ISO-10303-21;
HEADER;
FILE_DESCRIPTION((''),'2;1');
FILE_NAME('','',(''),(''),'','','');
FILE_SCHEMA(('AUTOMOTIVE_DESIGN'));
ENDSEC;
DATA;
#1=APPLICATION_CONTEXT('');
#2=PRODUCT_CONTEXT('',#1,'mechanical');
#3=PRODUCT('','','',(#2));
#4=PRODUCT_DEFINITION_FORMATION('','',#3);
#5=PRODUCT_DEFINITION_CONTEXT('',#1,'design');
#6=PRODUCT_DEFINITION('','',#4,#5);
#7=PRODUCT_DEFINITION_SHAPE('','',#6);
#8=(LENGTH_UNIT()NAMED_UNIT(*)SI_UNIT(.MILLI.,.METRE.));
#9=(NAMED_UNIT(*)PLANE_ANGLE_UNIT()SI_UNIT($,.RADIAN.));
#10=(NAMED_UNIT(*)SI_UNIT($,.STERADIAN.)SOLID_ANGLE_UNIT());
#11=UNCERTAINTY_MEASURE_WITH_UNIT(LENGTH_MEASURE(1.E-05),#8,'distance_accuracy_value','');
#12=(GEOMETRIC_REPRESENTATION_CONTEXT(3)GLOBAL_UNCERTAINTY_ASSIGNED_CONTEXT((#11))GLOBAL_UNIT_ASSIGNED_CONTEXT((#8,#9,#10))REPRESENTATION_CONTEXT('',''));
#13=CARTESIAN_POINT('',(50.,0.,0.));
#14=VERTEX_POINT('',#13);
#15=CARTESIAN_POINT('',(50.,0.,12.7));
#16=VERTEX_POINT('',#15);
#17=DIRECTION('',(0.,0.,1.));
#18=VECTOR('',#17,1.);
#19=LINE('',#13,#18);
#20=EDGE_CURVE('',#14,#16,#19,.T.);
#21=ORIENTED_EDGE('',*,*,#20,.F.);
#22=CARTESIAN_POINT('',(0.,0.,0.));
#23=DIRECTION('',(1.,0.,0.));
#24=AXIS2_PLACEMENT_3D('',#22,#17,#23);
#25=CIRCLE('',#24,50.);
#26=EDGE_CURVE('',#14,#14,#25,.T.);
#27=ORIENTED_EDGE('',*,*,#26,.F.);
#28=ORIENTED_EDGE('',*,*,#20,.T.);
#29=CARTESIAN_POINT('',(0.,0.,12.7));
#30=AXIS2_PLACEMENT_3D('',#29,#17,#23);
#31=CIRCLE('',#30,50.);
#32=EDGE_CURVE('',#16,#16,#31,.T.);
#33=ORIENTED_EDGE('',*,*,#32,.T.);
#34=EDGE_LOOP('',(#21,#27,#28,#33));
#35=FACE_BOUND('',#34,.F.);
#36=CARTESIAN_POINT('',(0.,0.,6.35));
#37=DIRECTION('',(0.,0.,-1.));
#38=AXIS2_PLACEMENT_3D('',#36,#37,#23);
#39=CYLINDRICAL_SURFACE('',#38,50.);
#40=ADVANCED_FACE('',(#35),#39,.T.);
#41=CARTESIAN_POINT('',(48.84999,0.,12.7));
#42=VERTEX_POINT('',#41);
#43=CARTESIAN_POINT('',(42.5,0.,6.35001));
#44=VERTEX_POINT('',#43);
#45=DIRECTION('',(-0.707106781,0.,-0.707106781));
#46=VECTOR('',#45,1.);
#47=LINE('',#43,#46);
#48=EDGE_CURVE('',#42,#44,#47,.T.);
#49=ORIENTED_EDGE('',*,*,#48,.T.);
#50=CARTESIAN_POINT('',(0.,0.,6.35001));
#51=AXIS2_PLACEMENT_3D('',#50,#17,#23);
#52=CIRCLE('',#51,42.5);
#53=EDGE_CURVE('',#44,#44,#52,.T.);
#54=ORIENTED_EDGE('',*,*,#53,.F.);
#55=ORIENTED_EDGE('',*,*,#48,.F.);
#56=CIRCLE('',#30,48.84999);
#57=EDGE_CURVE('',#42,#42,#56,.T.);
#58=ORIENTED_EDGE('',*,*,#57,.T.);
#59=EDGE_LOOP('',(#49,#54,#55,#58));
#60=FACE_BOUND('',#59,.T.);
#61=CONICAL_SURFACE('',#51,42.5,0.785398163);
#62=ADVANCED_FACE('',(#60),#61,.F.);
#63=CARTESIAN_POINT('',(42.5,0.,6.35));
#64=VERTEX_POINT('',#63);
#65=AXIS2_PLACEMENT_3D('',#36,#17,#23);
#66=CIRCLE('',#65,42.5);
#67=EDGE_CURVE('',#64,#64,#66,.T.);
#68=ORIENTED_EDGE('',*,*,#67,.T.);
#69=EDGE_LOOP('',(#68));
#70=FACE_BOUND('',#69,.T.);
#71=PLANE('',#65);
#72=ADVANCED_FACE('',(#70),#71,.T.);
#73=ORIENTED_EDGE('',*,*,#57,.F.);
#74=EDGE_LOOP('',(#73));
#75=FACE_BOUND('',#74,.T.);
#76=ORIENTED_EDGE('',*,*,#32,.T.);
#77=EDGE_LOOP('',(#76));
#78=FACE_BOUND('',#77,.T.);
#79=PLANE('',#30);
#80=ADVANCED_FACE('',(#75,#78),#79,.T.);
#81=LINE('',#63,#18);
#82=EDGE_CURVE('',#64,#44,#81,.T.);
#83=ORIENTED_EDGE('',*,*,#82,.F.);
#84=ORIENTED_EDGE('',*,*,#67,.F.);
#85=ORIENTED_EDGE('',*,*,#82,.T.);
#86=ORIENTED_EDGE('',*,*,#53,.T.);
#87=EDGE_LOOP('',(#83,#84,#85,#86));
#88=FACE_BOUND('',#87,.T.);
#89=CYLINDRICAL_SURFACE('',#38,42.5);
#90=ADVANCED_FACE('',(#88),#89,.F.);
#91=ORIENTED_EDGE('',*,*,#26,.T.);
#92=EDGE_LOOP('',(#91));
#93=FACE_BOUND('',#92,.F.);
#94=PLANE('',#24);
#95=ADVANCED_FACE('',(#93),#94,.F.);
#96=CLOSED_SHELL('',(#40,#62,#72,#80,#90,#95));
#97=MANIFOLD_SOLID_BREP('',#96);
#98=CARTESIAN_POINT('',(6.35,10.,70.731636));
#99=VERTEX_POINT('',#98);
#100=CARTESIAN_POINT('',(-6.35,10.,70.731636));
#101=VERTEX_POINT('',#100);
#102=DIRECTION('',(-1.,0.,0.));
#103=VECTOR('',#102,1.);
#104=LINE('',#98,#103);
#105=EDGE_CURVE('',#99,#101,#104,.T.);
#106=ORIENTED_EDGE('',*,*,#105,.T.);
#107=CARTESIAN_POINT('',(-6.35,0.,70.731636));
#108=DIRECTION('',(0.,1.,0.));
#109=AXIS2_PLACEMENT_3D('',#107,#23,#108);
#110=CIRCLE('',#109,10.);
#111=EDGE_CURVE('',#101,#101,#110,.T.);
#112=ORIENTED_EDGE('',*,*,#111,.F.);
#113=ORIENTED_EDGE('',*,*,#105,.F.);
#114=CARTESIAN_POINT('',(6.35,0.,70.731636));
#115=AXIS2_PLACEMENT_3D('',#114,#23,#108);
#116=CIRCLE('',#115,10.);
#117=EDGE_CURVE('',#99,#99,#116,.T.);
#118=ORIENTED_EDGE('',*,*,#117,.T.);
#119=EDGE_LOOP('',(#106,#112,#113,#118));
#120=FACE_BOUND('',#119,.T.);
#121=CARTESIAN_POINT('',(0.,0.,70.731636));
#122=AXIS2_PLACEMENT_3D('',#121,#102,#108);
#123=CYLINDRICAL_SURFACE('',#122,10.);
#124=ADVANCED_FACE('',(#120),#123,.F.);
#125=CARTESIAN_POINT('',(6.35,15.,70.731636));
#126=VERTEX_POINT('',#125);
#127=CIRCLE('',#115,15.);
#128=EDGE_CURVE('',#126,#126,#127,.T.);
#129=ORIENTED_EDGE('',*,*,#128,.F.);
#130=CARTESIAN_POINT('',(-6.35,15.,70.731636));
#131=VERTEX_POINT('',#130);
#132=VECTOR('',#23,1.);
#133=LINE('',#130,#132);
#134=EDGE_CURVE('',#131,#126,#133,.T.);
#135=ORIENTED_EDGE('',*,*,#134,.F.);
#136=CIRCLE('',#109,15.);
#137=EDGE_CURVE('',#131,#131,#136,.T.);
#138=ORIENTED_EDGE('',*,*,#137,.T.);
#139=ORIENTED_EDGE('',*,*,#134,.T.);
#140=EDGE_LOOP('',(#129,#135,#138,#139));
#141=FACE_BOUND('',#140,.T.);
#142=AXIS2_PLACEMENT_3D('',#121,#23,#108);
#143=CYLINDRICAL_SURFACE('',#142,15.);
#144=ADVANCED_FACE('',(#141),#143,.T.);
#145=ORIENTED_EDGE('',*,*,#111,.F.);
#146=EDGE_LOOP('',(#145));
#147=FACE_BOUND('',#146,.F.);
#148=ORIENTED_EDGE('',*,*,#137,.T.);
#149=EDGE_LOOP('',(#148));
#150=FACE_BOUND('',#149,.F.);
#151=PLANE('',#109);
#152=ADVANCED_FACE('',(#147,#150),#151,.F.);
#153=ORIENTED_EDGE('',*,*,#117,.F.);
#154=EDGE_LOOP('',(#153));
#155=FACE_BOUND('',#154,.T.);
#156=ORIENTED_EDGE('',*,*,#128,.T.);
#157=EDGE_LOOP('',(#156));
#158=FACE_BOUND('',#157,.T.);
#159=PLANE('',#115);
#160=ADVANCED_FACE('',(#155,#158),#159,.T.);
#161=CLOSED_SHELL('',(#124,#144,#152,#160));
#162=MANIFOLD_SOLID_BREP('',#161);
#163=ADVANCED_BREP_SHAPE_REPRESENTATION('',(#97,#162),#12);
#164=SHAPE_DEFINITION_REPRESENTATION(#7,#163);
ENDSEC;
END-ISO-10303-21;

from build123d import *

# Parameters (mm, degrees)
F0_R     = 50
F1_DEPTH = 6.35
F2_R     = 50
F2_R_2   = 42.5
F3_DEPTH = 6.35
F4_SIZE  = 6.34999
F5_R     = 15
F5_R_2   = 10
F6_DEPTH = 6.35


# Not quite as in the source:
# - a fillet or chamfer is up to 0.001 mm smaller than in the source, because OpenCascade refuses the exact size


with BuildPart() as f1:
    # F0 (on Top) → F1 (new body)
    with BuildSketch(Plane.XY):
        Circle(F0_R)
    extrude(amount=F1_DEPTH)

    # F2 (on face) → F3 (join)
    with BuildSketch(Plane.XY.offset(6.35)):
        Circle(F2_R)
        Circle(F2_R_2, mode=Mode.SUBTRACT)
    extrude(amount=F3_DEPTH)

    # F4 (size 6.35 in the source; OpenCascade refuses exactly that, so slightly less here)
    f4_edges = [f1.edges().sort_by_distance(p)[0] for p in [
        (-42.5, 0, 12.7),
    ]]
    chamfer(f4_edges, length=F4_SIZE)


with BuildPart() as f6:
    # F5 (on Right) → F6 (new body, symmetric)
    with BuildSketch(Plane.YZ):
        with Locations((0, 70.7316364521)):
            Circle(F5_R)
        with Locations((0, 70.7316364521)):
            Circle(F5_R_2, mode=Mode.SUBTRACT)
    extrude(amount=F6_DEPTH, both=True)


solid = Compound([f1.part, f6.part])
